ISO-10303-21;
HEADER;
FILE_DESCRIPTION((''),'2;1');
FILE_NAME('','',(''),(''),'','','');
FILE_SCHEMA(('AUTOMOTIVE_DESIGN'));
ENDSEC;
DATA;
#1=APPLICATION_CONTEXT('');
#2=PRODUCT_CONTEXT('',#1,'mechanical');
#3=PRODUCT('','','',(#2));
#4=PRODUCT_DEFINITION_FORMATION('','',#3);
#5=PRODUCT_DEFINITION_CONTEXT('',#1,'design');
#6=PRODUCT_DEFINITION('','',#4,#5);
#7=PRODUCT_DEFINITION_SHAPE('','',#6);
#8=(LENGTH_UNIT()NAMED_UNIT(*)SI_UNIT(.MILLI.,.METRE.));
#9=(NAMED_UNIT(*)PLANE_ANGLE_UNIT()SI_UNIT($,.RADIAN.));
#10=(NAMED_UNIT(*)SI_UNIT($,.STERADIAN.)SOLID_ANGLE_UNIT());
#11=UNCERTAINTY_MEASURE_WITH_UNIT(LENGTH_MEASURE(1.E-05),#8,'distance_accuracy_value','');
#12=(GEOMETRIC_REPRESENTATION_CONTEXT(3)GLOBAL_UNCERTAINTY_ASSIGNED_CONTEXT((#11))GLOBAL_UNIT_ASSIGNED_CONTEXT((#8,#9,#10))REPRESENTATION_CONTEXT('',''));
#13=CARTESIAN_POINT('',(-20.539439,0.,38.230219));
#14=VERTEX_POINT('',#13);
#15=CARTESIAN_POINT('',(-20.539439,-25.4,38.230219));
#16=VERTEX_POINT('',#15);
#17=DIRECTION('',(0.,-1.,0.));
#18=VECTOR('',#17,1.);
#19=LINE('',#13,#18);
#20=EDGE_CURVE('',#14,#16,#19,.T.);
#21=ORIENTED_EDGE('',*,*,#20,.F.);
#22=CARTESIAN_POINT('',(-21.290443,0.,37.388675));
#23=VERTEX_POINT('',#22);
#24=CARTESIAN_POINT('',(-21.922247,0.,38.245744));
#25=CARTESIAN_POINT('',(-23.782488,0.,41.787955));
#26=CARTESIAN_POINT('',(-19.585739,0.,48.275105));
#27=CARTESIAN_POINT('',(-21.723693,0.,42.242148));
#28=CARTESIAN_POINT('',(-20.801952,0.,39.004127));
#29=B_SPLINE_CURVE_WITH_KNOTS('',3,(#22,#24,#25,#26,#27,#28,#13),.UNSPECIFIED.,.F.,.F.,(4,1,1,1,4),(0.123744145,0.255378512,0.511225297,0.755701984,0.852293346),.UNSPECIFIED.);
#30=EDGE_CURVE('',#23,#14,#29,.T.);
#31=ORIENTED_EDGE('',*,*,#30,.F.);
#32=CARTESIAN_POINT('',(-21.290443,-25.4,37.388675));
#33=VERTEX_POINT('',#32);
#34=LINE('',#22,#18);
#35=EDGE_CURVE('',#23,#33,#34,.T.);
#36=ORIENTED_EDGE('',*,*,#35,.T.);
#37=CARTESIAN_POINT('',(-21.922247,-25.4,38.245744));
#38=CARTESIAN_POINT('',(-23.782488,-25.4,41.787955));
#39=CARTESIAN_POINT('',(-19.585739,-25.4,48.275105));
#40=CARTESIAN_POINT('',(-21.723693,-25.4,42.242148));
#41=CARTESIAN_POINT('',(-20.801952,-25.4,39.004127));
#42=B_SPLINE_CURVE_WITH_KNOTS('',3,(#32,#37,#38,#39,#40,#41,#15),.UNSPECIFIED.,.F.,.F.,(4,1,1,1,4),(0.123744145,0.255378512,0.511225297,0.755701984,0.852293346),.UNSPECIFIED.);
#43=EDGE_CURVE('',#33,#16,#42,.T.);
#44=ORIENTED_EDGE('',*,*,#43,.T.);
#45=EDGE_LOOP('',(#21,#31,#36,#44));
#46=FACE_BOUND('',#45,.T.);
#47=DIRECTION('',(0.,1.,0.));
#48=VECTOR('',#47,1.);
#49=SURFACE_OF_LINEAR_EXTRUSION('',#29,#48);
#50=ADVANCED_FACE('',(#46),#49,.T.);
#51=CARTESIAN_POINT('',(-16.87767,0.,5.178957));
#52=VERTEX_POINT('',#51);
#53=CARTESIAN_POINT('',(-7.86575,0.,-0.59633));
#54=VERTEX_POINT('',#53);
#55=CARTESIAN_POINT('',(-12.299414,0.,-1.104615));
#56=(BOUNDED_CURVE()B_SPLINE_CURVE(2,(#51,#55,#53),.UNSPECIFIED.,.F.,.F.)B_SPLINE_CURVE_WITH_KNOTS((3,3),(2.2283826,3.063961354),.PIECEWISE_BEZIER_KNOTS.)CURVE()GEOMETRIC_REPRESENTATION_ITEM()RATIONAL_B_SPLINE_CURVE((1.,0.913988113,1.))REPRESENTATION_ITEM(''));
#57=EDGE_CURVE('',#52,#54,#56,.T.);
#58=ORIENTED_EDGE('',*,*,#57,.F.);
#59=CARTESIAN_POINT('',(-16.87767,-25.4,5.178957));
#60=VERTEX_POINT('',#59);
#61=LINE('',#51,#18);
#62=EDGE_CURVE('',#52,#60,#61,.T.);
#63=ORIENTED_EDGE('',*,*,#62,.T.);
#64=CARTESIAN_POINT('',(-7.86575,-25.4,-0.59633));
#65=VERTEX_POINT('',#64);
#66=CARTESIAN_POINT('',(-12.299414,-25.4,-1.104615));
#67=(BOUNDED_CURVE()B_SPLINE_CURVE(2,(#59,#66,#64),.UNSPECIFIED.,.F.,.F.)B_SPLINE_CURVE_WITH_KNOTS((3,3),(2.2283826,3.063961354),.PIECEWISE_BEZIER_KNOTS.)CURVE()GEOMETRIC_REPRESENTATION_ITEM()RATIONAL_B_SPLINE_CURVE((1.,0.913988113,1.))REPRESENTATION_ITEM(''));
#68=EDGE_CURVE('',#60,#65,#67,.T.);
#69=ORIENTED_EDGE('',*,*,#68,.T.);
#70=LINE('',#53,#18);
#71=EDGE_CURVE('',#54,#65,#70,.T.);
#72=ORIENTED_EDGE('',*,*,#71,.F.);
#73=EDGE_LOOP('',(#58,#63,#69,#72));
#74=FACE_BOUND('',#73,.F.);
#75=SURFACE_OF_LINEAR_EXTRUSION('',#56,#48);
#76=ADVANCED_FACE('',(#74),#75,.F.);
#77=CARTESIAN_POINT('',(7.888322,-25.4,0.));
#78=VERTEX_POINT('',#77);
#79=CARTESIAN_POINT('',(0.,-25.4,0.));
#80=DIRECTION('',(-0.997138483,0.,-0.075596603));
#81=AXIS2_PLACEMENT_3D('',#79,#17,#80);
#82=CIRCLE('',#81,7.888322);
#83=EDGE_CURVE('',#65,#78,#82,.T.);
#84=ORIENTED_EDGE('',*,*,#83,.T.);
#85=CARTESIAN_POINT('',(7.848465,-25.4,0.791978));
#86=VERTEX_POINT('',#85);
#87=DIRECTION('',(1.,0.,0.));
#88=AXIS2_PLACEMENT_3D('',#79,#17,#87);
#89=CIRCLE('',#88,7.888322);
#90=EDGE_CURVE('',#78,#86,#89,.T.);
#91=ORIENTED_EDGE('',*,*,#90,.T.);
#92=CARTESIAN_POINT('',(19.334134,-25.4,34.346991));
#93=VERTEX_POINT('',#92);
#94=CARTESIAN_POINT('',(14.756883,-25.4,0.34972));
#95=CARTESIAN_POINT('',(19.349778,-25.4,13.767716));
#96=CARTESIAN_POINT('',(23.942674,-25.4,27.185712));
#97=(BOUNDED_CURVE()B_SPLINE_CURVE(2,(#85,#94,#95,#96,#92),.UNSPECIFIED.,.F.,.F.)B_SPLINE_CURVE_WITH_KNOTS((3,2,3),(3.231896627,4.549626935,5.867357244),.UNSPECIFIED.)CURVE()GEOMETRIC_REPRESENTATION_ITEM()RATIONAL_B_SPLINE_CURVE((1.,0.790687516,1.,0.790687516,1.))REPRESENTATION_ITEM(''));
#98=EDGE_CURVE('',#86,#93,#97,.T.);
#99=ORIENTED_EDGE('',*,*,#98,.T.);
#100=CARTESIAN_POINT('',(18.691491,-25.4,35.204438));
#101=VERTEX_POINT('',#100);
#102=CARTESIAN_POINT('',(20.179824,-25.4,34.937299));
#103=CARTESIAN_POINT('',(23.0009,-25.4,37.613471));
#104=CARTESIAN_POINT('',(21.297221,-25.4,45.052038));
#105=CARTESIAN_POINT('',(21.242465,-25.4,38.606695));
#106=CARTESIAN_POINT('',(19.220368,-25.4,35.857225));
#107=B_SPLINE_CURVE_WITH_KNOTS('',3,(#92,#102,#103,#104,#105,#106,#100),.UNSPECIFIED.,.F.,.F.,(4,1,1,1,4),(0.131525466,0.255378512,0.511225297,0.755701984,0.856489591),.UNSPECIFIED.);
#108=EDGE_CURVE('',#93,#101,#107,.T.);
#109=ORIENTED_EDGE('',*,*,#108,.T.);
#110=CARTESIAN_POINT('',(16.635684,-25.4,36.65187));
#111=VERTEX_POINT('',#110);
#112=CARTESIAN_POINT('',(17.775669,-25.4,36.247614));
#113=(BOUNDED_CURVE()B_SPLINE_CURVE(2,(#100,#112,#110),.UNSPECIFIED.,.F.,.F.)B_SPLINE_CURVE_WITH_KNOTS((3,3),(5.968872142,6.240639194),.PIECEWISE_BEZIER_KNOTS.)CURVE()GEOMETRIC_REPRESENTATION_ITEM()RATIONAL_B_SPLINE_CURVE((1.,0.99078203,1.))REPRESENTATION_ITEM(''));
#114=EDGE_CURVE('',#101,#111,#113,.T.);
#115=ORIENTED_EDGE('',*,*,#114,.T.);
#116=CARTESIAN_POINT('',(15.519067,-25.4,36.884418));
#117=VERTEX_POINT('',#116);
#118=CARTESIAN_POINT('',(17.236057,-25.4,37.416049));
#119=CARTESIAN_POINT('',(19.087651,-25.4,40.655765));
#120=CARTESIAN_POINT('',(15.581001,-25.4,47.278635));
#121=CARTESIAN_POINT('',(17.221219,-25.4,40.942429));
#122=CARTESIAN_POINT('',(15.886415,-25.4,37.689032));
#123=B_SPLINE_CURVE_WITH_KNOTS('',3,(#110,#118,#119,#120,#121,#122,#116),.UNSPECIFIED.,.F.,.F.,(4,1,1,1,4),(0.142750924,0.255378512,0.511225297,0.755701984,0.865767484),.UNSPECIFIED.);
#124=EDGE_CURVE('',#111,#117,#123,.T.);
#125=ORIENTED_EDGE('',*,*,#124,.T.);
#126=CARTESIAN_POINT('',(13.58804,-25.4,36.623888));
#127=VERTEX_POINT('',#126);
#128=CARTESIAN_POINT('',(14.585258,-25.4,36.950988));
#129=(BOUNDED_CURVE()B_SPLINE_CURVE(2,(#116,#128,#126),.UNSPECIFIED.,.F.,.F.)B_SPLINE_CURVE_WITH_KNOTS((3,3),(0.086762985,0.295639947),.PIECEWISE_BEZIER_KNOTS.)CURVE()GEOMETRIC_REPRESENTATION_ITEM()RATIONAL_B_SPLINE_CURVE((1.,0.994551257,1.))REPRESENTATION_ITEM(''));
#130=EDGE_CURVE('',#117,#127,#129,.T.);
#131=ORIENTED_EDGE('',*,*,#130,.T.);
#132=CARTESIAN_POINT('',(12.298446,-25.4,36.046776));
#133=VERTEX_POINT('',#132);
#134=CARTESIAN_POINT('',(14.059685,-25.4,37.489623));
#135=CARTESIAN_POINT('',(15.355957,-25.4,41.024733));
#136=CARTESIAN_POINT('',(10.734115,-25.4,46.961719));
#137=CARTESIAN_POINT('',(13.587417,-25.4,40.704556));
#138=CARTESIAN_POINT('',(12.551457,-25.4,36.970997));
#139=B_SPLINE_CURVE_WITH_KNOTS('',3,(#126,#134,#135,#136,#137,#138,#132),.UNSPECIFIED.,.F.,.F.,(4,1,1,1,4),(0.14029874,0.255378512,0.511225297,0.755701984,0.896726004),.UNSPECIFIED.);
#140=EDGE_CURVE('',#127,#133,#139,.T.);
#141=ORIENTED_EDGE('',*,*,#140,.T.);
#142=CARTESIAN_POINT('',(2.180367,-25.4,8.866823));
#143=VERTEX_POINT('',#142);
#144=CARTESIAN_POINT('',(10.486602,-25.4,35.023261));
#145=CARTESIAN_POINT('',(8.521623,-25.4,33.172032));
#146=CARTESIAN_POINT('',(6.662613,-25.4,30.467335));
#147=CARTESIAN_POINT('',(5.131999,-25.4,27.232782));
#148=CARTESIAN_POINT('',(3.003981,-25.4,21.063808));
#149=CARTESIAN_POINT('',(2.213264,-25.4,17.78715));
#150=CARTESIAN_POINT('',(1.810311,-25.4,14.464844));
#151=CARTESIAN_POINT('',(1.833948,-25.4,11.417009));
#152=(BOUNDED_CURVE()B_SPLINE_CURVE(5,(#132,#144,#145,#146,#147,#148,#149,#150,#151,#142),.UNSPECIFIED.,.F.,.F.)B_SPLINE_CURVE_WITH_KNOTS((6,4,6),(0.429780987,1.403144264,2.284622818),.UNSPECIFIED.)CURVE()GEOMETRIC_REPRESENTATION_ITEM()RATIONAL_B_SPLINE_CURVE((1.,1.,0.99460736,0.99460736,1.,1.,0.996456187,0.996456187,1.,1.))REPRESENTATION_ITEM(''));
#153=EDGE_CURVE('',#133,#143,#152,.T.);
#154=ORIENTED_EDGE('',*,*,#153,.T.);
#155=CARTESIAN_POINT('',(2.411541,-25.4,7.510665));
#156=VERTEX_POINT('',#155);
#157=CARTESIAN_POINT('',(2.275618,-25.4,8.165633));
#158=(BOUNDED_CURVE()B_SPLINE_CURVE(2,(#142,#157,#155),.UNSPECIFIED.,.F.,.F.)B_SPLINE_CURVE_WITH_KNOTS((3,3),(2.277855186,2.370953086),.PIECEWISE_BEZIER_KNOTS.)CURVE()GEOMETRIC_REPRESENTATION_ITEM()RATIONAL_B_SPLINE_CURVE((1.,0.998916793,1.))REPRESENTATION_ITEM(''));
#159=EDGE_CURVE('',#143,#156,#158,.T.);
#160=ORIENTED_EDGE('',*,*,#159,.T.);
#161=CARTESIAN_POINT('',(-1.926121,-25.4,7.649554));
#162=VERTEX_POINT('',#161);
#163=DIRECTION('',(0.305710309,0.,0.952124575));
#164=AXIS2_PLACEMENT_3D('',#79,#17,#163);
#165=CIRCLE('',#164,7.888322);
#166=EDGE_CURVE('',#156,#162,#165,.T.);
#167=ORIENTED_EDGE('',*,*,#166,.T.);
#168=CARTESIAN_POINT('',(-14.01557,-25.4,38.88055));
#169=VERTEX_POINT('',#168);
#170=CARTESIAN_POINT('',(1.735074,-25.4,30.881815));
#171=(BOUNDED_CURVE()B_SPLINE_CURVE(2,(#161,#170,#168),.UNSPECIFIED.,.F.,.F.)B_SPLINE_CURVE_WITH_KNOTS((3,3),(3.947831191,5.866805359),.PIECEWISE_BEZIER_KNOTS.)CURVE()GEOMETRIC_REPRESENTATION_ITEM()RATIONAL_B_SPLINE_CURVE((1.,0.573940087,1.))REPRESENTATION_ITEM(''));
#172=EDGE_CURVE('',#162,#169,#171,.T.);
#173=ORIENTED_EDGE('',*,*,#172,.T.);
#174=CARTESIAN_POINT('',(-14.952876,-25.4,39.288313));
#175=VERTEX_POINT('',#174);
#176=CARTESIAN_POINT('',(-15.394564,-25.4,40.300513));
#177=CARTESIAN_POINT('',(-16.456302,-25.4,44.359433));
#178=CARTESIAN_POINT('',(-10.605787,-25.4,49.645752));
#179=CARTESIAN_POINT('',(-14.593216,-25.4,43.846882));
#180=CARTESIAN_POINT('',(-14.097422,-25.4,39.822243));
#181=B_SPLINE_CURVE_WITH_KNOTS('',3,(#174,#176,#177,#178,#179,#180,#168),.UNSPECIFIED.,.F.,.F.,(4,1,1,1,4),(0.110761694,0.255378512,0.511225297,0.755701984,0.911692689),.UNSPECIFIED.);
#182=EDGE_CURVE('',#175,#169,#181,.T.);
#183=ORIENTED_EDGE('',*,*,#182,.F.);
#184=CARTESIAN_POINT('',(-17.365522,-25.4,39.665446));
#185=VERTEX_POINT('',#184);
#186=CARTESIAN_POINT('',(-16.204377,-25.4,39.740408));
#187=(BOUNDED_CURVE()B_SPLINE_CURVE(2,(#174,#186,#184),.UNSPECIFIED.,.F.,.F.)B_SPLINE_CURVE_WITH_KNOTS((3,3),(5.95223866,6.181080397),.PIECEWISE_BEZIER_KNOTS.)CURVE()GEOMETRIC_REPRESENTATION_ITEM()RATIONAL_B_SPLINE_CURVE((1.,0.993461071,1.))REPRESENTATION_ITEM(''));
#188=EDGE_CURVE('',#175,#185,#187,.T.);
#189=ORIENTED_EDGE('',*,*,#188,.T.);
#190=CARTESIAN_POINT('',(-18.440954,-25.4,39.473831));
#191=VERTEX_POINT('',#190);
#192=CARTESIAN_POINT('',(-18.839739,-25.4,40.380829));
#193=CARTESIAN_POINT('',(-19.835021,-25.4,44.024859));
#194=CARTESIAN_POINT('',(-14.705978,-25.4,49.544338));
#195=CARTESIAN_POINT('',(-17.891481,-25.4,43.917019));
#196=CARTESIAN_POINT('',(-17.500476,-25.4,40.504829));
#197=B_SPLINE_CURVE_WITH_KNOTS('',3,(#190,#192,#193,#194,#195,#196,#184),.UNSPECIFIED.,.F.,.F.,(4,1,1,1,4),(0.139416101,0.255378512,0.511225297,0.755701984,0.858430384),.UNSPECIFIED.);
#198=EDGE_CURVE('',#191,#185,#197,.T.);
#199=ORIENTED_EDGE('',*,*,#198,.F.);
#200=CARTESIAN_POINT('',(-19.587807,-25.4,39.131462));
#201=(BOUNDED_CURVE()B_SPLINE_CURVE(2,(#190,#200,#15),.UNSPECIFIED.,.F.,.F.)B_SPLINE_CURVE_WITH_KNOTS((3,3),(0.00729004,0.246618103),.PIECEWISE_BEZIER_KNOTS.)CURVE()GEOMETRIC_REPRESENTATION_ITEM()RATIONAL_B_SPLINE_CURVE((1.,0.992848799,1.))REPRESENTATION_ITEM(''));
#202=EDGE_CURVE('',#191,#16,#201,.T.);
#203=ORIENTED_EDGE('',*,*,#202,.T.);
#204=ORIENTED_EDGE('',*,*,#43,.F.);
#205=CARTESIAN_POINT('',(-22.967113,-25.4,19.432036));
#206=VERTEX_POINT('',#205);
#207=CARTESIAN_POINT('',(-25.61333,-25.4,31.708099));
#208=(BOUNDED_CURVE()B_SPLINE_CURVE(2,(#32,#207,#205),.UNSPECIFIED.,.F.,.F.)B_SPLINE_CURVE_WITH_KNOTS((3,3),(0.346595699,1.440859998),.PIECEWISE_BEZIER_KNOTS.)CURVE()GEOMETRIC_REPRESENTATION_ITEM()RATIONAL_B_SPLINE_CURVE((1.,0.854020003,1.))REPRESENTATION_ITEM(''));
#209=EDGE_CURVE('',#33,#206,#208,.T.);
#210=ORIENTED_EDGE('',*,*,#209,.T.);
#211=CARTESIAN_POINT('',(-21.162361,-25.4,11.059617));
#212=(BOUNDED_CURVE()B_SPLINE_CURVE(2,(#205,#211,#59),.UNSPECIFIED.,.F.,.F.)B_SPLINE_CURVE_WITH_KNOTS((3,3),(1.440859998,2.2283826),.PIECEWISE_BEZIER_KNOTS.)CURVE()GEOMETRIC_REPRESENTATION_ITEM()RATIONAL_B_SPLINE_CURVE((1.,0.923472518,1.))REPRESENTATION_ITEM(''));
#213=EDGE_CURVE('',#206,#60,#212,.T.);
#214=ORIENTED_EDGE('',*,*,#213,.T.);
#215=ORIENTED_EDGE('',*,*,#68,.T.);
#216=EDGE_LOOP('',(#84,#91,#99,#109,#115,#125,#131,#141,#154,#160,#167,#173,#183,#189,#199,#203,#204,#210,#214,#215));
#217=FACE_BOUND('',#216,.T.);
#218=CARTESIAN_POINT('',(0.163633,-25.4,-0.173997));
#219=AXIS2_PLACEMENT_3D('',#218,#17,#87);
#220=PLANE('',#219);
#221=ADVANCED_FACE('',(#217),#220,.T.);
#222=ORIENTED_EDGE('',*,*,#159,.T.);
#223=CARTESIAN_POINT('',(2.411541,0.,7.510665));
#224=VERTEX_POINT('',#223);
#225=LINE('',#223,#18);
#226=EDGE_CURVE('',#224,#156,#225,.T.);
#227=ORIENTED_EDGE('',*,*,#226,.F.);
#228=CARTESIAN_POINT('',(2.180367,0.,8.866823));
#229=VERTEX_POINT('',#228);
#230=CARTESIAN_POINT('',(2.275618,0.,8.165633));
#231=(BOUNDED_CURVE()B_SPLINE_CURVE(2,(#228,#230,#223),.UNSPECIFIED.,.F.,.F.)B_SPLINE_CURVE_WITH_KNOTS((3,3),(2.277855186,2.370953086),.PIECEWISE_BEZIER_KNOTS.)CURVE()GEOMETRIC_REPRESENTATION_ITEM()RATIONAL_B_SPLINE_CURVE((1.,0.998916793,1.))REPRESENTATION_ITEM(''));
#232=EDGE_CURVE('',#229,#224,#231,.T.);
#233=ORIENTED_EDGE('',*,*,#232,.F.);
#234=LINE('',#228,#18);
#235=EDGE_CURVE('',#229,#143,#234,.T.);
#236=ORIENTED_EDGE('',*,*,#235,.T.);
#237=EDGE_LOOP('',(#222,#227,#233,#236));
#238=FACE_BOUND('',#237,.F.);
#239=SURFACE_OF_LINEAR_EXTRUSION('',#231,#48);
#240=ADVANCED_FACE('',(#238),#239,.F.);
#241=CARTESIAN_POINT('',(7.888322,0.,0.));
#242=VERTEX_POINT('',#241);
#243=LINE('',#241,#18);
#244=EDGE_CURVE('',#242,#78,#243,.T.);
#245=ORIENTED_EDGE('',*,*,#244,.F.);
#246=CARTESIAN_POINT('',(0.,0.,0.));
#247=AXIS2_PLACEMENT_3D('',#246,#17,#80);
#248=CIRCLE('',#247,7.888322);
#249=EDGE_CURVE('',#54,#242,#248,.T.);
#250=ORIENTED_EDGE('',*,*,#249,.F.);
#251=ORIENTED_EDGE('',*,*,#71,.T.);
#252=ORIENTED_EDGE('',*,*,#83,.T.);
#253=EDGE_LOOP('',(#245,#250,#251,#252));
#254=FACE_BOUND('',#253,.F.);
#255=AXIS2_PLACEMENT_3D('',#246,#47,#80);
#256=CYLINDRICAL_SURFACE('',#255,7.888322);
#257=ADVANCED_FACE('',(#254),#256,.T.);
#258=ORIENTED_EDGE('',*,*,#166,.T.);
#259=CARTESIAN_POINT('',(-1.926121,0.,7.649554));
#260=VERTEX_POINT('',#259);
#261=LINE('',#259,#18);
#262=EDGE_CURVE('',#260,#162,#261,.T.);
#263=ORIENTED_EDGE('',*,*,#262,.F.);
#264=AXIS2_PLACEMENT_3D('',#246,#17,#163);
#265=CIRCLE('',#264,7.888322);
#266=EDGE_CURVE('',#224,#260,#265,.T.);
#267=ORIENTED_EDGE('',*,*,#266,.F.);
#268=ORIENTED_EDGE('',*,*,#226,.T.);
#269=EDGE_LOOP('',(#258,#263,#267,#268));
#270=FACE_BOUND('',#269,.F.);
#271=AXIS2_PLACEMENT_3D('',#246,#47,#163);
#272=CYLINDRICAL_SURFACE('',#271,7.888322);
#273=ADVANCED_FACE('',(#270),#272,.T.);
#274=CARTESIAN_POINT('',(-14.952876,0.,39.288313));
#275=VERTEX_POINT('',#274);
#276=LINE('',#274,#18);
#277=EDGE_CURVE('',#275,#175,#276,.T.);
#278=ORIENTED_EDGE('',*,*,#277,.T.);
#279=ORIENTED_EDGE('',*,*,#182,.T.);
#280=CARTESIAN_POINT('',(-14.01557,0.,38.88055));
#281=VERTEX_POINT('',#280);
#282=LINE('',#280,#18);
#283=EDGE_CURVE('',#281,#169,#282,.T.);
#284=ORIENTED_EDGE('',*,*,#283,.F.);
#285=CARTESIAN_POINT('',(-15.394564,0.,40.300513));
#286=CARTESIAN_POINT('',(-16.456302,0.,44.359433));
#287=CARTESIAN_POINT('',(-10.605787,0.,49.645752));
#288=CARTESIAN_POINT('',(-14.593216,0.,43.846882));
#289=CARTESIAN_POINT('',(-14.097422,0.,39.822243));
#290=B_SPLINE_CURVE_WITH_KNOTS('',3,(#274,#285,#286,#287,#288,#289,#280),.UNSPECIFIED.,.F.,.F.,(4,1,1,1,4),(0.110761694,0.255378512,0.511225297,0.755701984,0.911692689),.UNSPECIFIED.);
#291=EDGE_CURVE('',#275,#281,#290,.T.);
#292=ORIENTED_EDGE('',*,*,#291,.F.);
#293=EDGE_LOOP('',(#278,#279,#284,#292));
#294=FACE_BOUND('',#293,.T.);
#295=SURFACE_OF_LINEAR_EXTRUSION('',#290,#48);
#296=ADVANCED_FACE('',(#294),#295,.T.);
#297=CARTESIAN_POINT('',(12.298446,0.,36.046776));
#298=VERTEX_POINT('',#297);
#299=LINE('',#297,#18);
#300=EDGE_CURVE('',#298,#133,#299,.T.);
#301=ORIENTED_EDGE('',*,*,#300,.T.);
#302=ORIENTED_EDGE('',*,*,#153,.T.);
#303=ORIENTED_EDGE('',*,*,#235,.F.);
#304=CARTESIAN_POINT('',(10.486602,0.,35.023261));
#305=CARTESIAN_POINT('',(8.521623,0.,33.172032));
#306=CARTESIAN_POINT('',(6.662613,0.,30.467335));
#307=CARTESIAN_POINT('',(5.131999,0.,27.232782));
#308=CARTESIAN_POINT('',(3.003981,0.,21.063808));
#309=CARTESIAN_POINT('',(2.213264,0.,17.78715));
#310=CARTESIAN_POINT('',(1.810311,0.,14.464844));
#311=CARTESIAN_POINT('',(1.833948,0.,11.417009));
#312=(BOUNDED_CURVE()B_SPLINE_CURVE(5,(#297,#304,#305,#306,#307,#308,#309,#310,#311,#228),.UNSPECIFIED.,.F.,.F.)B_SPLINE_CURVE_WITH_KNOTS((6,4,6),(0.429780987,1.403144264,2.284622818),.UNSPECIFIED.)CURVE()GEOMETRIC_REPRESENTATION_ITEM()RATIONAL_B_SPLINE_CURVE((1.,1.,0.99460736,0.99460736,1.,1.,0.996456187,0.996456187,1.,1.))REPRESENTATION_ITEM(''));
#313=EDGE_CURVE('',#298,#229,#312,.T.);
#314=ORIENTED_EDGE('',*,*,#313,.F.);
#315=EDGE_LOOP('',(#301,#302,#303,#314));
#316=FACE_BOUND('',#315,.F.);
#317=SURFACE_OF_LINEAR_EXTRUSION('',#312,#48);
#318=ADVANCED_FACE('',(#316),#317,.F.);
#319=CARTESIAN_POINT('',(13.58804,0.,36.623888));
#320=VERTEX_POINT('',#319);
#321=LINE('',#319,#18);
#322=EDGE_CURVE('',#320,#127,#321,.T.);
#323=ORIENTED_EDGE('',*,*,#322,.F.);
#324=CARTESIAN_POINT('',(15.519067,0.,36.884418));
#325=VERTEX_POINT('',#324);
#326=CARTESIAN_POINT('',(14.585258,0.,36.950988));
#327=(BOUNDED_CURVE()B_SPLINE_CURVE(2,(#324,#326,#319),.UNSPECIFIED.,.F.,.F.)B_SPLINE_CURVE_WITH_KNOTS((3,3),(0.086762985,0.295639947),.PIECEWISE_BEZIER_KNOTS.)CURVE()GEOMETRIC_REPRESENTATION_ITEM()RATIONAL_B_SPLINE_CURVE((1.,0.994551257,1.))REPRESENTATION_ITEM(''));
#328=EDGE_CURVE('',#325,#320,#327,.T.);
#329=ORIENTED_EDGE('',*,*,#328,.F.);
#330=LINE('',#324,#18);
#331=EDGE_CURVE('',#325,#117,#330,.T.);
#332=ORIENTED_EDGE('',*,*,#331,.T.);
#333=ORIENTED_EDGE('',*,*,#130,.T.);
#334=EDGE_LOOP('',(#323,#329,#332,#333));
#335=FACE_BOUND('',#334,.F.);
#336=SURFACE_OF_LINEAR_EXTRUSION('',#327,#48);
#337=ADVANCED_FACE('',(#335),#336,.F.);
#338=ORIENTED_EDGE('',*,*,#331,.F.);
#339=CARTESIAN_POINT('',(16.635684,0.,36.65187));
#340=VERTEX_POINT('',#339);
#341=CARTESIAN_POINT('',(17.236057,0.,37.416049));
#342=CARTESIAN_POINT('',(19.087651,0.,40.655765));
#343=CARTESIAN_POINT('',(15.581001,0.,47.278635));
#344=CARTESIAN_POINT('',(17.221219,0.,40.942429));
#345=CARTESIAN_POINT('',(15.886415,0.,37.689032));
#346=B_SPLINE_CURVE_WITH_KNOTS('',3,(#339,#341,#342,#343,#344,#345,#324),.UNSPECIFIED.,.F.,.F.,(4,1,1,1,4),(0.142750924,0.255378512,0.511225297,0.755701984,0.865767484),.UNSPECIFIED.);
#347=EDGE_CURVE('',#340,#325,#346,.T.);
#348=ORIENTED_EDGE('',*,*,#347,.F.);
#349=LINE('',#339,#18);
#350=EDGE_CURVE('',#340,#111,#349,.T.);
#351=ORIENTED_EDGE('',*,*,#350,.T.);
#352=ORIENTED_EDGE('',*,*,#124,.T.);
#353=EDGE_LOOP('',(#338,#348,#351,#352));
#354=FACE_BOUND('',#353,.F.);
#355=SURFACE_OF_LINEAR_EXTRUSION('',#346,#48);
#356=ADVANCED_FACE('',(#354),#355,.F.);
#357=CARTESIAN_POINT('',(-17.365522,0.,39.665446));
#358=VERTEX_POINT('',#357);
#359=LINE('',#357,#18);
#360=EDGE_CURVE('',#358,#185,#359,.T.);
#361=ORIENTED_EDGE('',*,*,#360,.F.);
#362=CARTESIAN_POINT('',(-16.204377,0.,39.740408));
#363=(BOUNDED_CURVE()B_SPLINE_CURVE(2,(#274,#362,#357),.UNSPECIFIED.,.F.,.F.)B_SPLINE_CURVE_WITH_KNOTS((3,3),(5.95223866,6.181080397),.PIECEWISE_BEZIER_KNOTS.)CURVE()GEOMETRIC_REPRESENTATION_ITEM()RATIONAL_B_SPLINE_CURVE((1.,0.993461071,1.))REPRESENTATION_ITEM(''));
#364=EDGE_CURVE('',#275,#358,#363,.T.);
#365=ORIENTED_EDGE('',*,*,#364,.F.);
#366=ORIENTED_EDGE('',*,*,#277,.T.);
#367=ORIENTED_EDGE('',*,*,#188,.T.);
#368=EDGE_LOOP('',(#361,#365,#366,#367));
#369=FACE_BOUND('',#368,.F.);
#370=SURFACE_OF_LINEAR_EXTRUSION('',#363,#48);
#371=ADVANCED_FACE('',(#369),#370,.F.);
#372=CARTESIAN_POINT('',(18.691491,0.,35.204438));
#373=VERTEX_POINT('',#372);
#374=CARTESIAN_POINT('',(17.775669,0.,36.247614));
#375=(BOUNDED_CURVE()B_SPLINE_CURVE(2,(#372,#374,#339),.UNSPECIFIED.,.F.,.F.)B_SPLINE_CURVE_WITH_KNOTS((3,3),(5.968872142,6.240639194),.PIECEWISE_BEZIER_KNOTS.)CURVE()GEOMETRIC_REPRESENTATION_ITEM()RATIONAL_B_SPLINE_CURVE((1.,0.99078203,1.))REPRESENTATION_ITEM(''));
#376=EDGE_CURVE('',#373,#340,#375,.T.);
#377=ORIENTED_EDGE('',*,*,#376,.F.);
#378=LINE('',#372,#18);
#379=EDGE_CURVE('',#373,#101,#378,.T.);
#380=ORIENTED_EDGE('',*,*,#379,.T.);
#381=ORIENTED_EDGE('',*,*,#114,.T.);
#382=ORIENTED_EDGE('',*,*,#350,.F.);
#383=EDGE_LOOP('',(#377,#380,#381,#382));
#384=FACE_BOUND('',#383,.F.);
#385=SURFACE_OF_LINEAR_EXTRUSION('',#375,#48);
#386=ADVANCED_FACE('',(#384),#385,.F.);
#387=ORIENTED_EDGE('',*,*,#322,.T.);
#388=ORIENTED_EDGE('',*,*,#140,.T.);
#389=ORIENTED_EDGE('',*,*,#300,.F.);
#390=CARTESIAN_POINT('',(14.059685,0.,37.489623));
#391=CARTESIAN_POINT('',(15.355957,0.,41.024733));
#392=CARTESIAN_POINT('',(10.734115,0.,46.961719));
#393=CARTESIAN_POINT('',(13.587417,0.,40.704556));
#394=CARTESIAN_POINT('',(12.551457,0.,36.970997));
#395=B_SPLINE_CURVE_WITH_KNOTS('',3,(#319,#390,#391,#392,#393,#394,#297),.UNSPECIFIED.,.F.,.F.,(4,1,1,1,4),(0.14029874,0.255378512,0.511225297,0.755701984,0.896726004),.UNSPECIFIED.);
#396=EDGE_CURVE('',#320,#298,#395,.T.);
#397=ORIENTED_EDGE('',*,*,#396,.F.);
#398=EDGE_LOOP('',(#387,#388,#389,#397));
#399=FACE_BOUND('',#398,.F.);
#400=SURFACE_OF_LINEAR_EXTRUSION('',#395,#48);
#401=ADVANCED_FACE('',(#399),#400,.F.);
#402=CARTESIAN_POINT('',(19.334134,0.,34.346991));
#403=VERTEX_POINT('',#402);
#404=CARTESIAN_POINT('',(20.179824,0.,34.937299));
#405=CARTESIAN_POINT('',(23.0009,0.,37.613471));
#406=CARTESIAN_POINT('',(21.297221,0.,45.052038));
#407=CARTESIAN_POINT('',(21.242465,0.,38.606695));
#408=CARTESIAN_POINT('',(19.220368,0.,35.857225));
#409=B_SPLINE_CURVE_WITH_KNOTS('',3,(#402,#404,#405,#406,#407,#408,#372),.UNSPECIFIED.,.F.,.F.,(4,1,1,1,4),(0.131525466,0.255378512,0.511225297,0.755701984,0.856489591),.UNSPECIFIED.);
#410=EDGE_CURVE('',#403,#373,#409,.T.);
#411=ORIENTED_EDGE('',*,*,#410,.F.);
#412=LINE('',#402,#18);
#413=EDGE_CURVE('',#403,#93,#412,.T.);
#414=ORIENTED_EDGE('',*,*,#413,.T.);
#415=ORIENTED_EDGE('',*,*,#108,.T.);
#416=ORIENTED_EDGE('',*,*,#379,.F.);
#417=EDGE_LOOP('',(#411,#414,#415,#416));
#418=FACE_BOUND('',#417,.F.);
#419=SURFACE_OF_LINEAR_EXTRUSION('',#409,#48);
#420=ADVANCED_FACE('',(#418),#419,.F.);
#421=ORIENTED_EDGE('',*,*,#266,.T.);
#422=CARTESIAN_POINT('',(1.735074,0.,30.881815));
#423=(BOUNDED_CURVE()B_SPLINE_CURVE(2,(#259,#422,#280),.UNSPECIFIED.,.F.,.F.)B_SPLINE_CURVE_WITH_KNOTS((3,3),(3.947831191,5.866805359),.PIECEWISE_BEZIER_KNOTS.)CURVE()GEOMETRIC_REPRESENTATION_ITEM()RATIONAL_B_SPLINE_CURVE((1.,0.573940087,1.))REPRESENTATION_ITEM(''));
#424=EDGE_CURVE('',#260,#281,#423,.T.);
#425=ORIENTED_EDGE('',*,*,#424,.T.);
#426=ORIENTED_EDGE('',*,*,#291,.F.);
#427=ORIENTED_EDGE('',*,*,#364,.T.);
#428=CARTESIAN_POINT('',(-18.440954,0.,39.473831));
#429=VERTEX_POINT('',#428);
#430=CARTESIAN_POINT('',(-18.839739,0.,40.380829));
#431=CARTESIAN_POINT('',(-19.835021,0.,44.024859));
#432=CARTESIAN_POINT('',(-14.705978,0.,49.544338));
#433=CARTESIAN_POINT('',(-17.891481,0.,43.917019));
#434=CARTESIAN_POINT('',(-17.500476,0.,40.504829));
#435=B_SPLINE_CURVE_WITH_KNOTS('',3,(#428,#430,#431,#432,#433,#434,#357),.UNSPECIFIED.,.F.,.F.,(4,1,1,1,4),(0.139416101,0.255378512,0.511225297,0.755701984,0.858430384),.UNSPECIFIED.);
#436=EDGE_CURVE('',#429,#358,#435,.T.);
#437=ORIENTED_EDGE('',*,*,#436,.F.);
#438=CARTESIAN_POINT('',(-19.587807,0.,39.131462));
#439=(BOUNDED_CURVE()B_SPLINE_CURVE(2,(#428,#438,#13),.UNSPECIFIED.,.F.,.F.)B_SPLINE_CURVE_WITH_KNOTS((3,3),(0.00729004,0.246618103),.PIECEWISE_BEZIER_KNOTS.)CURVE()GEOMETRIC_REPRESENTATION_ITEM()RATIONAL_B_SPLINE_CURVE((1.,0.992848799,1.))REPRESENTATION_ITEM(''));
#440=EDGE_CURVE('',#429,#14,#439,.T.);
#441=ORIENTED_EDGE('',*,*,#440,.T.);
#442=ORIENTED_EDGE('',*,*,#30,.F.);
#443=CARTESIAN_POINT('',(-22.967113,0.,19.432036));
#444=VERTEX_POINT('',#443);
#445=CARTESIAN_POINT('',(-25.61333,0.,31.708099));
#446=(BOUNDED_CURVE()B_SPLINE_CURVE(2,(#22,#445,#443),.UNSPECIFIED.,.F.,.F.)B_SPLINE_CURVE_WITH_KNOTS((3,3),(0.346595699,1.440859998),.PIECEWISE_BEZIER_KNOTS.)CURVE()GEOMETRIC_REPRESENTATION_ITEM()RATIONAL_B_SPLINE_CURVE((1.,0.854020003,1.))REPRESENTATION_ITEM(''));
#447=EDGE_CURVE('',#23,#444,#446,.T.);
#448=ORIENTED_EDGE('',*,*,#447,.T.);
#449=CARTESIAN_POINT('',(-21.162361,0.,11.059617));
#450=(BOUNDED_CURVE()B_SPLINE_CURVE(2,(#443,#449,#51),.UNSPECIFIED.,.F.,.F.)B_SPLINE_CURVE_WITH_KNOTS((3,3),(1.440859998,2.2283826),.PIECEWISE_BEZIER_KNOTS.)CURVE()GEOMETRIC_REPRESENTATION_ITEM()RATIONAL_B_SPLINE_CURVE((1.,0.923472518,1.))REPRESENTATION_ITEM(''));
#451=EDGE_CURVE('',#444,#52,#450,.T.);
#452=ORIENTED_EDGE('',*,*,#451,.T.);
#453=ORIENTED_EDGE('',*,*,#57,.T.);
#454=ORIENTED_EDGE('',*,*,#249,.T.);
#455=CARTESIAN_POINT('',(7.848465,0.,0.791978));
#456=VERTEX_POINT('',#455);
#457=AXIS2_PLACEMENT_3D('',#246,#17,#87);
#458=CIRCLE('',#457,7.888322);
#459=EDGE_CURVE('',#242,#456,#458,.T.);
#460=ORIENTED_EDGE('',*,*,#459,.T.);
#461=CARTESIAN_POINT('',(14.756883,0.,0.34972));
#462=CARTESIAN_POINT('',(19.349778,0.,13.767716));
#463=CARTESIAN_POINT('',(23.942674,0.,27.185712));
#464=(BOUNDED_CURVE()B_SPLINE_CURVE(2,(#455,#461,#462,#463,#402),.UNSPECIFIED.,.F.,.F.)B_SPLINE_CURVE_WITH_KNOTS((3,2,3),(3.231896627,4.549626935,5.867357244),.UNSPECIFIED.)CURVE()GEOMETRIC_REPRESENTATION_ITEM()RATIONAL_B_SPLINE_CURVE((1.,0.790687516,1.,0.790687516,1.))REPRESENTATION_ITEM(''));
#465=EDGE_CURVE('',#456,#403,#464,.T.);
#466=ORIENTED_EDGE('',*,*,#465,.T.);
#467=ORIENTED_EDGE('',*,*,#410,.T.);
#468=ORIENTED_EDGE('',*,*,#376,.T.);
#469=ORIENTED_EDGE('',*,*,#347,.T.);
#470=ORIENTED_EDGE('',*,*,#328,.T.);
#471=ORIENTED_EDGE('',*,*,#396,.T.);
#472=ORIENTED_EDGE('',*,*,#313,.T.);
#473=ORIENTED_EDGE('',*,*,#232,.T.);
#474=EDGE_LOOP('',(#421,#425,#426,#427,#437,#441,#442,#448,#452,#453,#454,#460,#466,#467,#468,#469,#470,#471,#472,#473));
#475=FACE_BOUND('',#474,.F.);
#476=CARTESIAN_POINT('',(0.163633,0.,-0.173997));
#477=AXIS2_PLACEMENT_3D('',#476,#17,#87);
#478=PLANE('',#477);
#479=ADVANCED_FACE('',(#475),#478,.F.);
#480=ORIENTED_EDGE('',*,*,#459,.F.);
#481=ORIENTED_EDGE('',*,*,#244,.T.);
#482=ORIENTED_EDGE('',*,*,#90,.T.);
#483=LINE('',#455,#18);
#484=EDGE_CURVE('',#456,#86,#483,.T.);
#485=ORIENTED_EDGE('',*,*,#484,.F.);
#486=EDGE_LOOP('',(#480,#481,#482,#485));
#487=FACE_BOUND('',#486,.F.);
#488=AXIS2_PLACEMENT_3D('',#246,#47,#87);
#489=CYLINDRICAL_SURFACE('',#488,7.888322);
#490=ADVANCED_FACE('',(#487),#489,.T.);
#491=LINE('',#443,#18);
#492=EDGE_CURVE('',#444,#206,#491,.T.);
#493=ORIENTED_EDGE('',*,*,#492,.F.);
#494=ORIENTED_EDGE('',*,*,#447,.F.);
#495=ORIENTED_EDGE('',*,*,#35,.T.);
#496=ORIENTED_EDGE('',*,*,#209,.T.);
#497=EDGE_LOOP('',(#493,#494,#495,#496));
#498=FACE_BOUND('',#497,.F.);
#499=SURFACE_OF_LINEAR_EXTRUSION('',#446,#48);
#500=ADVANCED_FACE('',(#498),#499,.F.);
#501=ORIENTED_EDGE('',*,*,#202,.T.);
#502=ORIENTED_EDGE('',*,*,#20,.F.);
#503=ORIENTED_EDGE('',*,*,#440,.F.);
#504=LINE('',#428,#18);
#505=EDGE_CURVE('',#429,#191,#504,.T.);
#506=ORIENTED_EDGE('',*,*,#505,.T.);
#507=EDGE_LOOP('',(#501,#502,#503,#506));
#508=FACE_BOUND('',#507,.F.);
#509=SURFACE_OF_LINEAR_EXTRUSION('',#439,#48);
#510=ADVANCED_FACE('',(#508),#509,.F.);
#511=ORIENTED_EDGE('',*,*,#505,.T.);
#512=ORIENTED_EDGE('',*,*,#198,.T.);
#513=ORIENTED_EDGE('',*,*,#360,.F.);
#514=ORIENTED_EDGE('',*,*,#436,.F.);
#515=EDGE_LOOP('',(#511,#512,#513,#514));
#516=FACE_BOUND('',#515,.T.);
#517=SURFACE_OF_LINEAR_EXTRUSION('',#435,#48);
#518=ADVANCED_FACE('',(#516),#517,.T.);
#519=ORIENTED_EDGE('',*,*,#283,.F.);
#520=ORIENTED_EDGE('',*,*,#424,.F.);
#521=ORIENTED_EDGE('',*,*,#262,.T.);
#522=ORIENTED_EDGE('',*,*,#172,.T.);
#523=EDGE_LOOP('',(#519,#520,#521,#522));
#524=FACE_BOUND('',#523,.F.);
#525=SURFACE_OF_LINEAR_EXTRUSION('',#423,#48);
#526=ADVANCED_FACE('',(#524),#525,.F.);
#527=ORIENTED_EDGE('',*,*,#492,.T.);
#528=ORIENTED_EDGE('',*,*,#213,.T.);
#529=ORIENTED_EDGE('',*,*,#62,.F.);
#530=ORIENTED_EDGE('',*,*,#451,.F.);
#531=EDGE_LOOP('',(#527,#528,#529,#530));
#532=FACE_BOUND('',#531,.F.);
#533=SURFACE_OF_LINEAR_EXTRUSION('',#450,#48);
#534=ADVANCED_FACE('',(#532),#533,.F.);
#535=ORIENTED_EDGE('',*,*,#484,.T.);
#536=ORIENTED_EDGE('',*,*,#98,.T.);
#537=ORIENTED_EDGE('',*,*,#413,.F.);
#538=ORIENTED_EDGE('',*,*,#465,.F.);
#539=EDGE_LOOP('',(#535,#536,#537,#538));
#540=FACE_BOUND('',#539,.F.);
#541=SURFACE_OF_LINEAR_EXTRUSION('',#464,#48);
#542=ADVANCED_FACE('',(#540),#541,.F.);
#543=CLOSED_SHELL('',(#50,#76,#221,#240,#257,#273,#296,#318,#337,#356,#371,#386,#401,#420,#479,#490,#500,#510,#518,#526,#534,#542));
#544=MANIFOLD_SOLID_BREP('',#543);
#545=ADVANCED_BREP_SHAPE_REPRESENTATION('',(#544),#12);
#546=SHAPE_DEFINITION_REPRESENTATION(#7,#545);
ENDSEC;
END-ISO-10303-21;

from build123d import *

# Parameters (mm, degrees)
F1_DEPTH = 25.4


# Not quite as in the source:
# - a feature of the source that left no trace in its solid (it failed there, or was rolled back) is left out


with BuildPart() as f1:
    # F0 (on Front) → F1 (new body)
    with BuildSketch(Plane.XZ):
        with BuildLine():
            ThreePointArc((-7.8657495184, -0.5963303534), (0.2983787071, -7.8826769263), (7.8883220888, 0))
            ThreePointArc((7.8883220888, 0), (7.8783514063, 0.396490223), (7.848464564, 0.7919781345))
            add(Edge.make_bspline(
                [(2.4115413859, 7.5106653182), (3.7514217892, 1.0542595546), (7.848464564, 0.7919781345)],
                knots=[2.3709530861, 2.3709530861, 2.3709530861, 3.2318966265, 3.2318966265, 3.2318966265], degree=2, weights=[1, 0.9087689813, 1]))
            ThreePointArc((2.4115413859, 7.5106653182), (0.2524493598, 7.8842814954), (-1.9261214081, 7.6495543464))
            add(Edge.make_bspline(
                [(-7.8657495184, -0.5963303534), (-3.1402244939, -0.0545859635), (-1.9261214081, 7.6495543464)],
                knots=[3.063961354, 3.063961354, 3.063961354, 3.9478311905, 3.9478311905, 3.9478311905], degree=2, weights=[1, 0.903925812, 1]))
        make_face()
        with BuildLine():
            add(Edge.make_bspline(
                [(2.4115413859, 7.5106653182), (3.7514217892, 1.0542595546), (7.848464564, 0.7919781345)],
                knots=[2.3709530861, 2.3709530861, 2.3709530861, 3.2318966265, 3.2318966265, 3.2318966265], degree=2, weights=[1, 0.9087689813, 1]))
            ThreePointArc((7.848464564, 0.7919781345), (6.1320567423, 4.9622077231), (2.4115413859, 7.5106653182))
        make_face()
        with BuildLine():
            ThreePointArc((2.4115413859, 7.5106653182), (6.1320567423, 4.9622077231), (7.848464564, 0.7919781345))
            add(Edge.make_bspline(
                [(7.848464564, 0.7919781345), (14.756882994, 0.3497201705), (19.3497784768, 13.7677159429), (23.9426739595, 27.1857117153), (19.3341341159, 34.3469906686)],
                knots=[3.2318966265, 3.2318966265, 3.2318966265, 4.5496269351, 4.5496269351, 5.8673572438, 5.8673572438, 5.8673572438], degree=2, weights=[1, 0.7906875156, 1, 0.7906875156, 1]))
            add(Edge.make_bspline(
                [(17.4727290869, 33.5254147649), (17.6220032936, 33.411960895), (18.4360560306, 33.7201138992), (19.3341341159, 34.3469906686)],
                knots=[0, 0, 0, 0, 0.1315254658, 0.1315254658, 0.1315254658, 0.1315254658], degree=3))
            add(Edge.make_bspline(
                [(18.6914906825, 35.2044384669), (17.9384272736, 34.2749423779), (17.3098526255, 33.649206847), (17.4727290869, 33.5254147649)],
                knots=[0.856489591, 0.856489591, 0.856489591, 0.856489591, 1, 1, 1, 1], degree=3))
            add(Edge.make_bspline(
                [(18.6914906825, 35.2044384669), (17.7756691464, 36.2476144498), (16.635683622, 36.651870342)],
                knots=[5.9688721424, 5.9688721424, 5.9688721424, 6.2406391942, 6.2406391942, 6.2406391942], degree=2, weights=[1, 0.9907820304, 1]))
            add(Edge.make_bspline(
                [(14.8701351136, 35.1549200714), (15.058499279, 35.0779113459), (15.8747352171, 35.6833048254), (16.635683622, 36.651870342)],
                knots=[0, 0, 0, 0, 0.1427509238, 0.1427509238, 0.1427509238, 0.1427509238], degree=3))
            add(Edge.make_bspline(
                [(15.5190667523, 36.8844184863), (15.0710606672, 35.9031366901), (14.6930112455, 35.2273334378), (14.8701351136, 35.1549200714)],
                knots=[0.8657674842, 0.8657674842, 0.8657674842, 0.8657674842, 1, 1, 1, 1], degree=3))
            add(Edge.make_bspline(
                [(15.5190667523, 36.8844184863), (14.5852576975, 36.9509876552), (13.5880398976, 36.6238878042)],
                knots=[0.0867629846, 0.0867629846, 0.0867629846, 0.2956399467, 0.2956399467, 0.2956399467], degree=2, weights=[1, 0.9945512572, 1]))
            add(Edge.make_bspline(
                [(12.1393091977, 34.898750484), (12.3347678279, 34.8563616726), (13.013036649, 35.5684327938), (13.5880398976, 36.6238878042)],
                knots=[0, 0, 0, 0, 0.14029874, 0.14029874, 0.14029874, 0.14029874], degree=3))
            add(Edge.make_bspline(
                [(12.2984461836, 36.0467759602), (12.1131626378, 35.3699550758), (11.9954319704, 34.9299529161), (12.1393091977, 34.898750484)],
                knots=[0.8967260045, 0.8967260045, 0.8967260045, 0.8967260045, 1, 1, 1, 1], degree=3))
            add(Edge.make_bspline(
                [(12.2984461836, 36.0467759602), (7.1738143092, 33.1518583115), (4.0152813166, 23.9954967618)],
                knots=[0.4297809871, 0.4297809871, 0.4297809871, 1.4031442636, 1.4031442636, 1.4031442636], degree=2, weights=[1, 0.8838897048, 1]))
            ThreePointArc((4.0152813166, 23.9954967618), (17.180368154, 14.7231281706), (2.1803673546, 8.8668232992))
            add(Edge.make_bspline(
                [(2.1803673546, 8.8668232992), (2.2756176481, 8.16563333), (2.4115413859, 7.5106653182)],
                knots=[2.2778551861, 2.2778551861, 2.2778551861, 2.3709530861, 2.3709530861, 2.3709530861], degree=2, weights=[1, 0.9989167932, 1]))
        make_face()
        with BuildLine():
            add(Edge.make_bspline(
                [(-16.8776699334, 5.1789570742), (-12.2994136592, -1.1046151815), (-7.8657495184, -0.5963303534)],
                knots=[2.2283826001, 2.2283826001, 2.2283826001, 3.063961354, 3.063961354, 3.063961354], degree=2, weights=[1, 0.9139881132, 1]))
            ThreePointArc((-7.8657495184, -0.5963303534), (-6.4006904066, 4.6105083989), (-1.9261214081, 7.6495543464))
            add(Edge.make_bspline(
                [(-1.9261214081, 7.6495543464), (1.7350735491, 30.881815249), (-14.0155701505, 38.8805496381)],
                knots=[3.9478311905, 3.9478311905, 3.9478311905, 5.8668053595, 5.8668053595, 5.8668053595], degree=2, weights=[1, 0.5739400867, 1]))
            add(Edge.make_bspline(
                [(-14.0155701505, 38.8805496381), (-13.9692331136, 38.3474513179), (-13.9585554591, 38.0149682113), (-14.0843456728, 38.01005632)],
                knots=[0.9116926893, 0.9116926893, 0.9116926893, 0.9116926893, 1, 1, 1, 1], degree=3))
            add(Edge.make_bspline(
                [(-14.0843456728, 38.01005632), (-14.2421212522, 38.0038954552), (-14.6145890314, 38.5130719057), (-14.9528763828, 39.2883132484)],
                knots=[0, 0, 0, 0, 0.1107616938, 0.1107616938, 0.1107616938, 0.1107616938], degree=3))
            add(Edge.make_bspline(
                [(-14.9528763828, 39.2883132484), (-16.2043765158, 39.7404083717), (-17.3655223204, 39.6654462324)],
                knots=[5.9522386597, 5.9522386597, 5.9522386597, 6.1810803974, 6.1810803974, 6.1810803974], degree=2, weights=[1, 0.9934610711, 1]))
            add(Edge.make_bspline(
                [(-17.3655223204, 39.6654462324), (-17.1795434662, 38.5086964495), (-16.9569761256, 37.6751636257), (-17.1571826672, 37.649743259)],
                knots=[0.8584303839, 0.8584303839, 0.8584303839, 0.8584303839, 1, 1, 1, 1], degree=3))
            add(Edge.make_bspline(
                [(-17.1571826672, 37.649743259), (-17.3543437255, 37.6247095794), (-17.9615142694, 38.3833898112), (-18.4409544135, 39.473830681)],
                knots=[0, 0, 0, 0, 0.1394161006, 0.1394161006, 0.1394161006, 0.1394161006], degree=3))
            add(Edge.make_bspline(
                [(-18.4409544135, 39.473830681), (-19.5878068307, 39.1314621905), (-20.5394386517, 38.2302190383)],
                knots=[0.0072900396, 0.0072900396, 0.0072900396, 0.2466181031, 0.2466181031, 0.2466181031], degree=2, weights=[1, 0.9928487993, 1]))
            add(Edge.make_bspline(
                [(-20.5394386517, 38.2302190383), (-20.1380049057, 37.0467661724), (-19.7331230605, 36.1979612039), (-19.9342295527, 36.1355692148)],
                knots=[0.8522933462, 0.8522933462, 0.8522933462, 0.8522933462, 1, 1, 1, 1], degree=3))
            add(Edge.make_bspline(
                [(-19.9342295527, 36.1355692148), (-20.102710459, 36.0832991028), (-20.6965090727, 36.5829791601), (-21.2904428927, 37.3886749603)],
                knots=[0, 0, 0, 0, 0.1237441449, 0.1237441449, 0.1237441449, 0.1237441449], degree=3))
            add(Edge.make_bspline(
                [(-21.2904428927, 37.3886749603), (-25.6133300033, 31.7080986333), (-22.9671125849, 19.4320361213)],
                knots=[0.3465956992, 0.3465956992, 0.3465956992, 1.4408599981, 1.4408599981, 1.4408599981], degree=2, weights=[1, 0.854020003, 1]))
            ThreePointArc((-22.9671125849, 19.4320361213), (-7.0630025292, 17.7995031872), (-16.8776699334, 5.1789570742))
        make_face()
        with BuildLine():
            ThreePointArc((-1.9261214081, 7.6495543464), (-6.4006904066, 4.6105083989), (-7.8657495184, -0.5963303534))
            add(Edge.make_bspline(
                [(-7.8657495184, -0.5963303534), (-3.1402244939, -0.0545859635), (-1.9261214081, 7.6495543464)],
                knots=[3.063961354, 3.063961354, 3.063961354, 3.9478311905, 3.9478311905, 3.9478311905], degree=2, weights=[1, 0.903925812, 1]))
        make_face()
        with BuildLine():
            add(Edge.make_bspline(
                [(17.4727290869, 33.5254147649), (17.6220032936, 33.411960895), (18.4360560306, 33.7201138992), (19.3341341159, 34.3469906686)],
                knots=[0, 0, 0, 0, 0.1315254658, 0.1315254658, 0.1315254658, 0.1315254658], degree=3))
            add(Edge.make_bspline(
                [(19.3341341159, 34.3469906686), (19.0317675739, 34.8168425581), (18.6914906825, 35.2044384669)],
                knots=[5.8673572438, 5.8673572438, 5.8673572438, 5.9688721424, 5.9688721424, 5.9688721424], degree=2, weights=[1, 0.9987121172, 1]))
            add(Edge.make_bspline(
                [(18.6914906825, 35.2044384669), (17.9384272736, 34.2749423779), (17.3098526255, 33.649206847), (17.4727290869, 33.5254147649)],
                knots=[0.856489591, 0.856489591, 0.856489591, 0.856489591, 1, 1, 1, 1], degree=3))
        make_face()
        with BuildLine():
            add(Edge.make_bspline(
                [(19.3341341159, 34.3469906686), (19.0317675739, 34.8168425581), (18.6914906825, 35.2044384669)],
                knots=[5.8673572438, 5.8673572438, 5.8673572438, 5.9688721424, 5.9688721424, 5.9688721424], degree=2, weights=[1, 0.9987121172, 1]))
            add(Edge.make_bspline(
                [(19.3341341159, 34.3469906686), (20.1798236278, 34.9372991482), (23.0009000721, 37.6134714521), (21.297221073, 45.0520380481), (21.2424649704, 38.6066952932), (19.2203684111, 35.8572251704), (18.6914906825, 35.2044384669)],
                knots=[0.1315254658, 0.1315254658, 0.1315254658, 0.1315254658, 0.2553785124, 0.5112252974, 0.7557019837, 0.856489591, 0.856489591, 0.856489591, 0.856489591], degree=3))
        make_face()
        with BuildLine():
            add(Edge.make_bspline(
                [(-22.9671125849, 19.4320361213), (-21.1623610737, 11.0596166006), (-16.8776699334, 5.1789570742)],
                knots=[1.4408599981, 1.4408599981, 1.4408599981, 2.2283826001, 2.2283826001, 2.2283826001], degree=2, weights=[1, 0.9234725177, 1]))
            ThreePointArc((-16.8776699334, 5.1789570742), (-7.0630025292, 17.7995031872), (-22.9671125849, 19.4320361213))
        make_face()
        with BuildLine():
            add(Edge.make_bspline(
                [(4.0152813166, 23.9954967618), (1.2243313225, 15.9047320704), (2.1803673546, 8.8668232992)],
                knots=[1.4031442636, 1.4031442636, 1.4031442636, 2.2778551861, 2.2778551861, 2.2778551861], degree=2, weights=[1, 0.9058749116, 1]))
            ThreePointArc((2.1803673546, 8.8668232992), (17.180368154, 14.7231281706), (4.0152813166, 23.9954967618))
        make_face()
        with BuildLine():
            add(Edge.make_bspline(
                [(-14.0155701505, 38.8805496381), (-13.9692331136, 38.3474513179), (-13.9585554591, 38.0149682113), (-14.0843456728, 38.01005632)],
                knots=[0.9116926893, 0.9116926893, 0.9116926893, 0.9116926893, 1, 1, 1, 1], degree=3))
            add(Edge.make_bspline(
                [(-14.0155701505, 38.8805496381), (-14.4874124644, 39.1201678667), (-14.9528763828, 39.2883132484)],
                knots=[5.8668053595, 5.8668053595, 5.8668053595, 5.9522386597, 5.9522386597, 5.9522386597], degree=2, weights=[1, 0.9990877826, 1]))
            add(Edge.make_bspline(
                [(-14.0843456728, 38.01005632), (-14.2421212522, 38.0038954552), (-14.6145890314, 38.5130719057), (-14.9528763828, 39.2883132484)],
                knots=[0, 0, 0, 0, 0.1107616938, 0.1107616938, 0.1107616938, 0.1107616938], degree=3))
        make_face()
        with BuildLine():
            add(Edge.make_bspline(
                [(-14.0155701505, 38.8805496381), (-14.4874124644, 39.1201678667), (-14.9528763828, 39.2883132484)],
                knots=[5.8668053595, 5.8668053595, 5.8668053595, 5.9522386597, 5.9522386597, 5.9522386597], degree=2, weights=[1, 0.9990877826, 1]))
            add(Edge.make_bspline(
                [(-14.9528763828, 39.2883132484), (-15.3945637468, 40.3005127993), (-16.4563018581, 44.3594325367), (-10.6057865956, 49.6457518305), (-14.5932155129, 43.8468818401), (-14.0974223439, 39.8222427148), (-14.0155701505, 38.8805496381)],
                knots=[0.1107616938, 0.1107616938, 0.1107616938, 0.1107616938, 0.2553785124, 0.5112252974, 0.7557019837, 0.9116926893, 0.9116926893, 0.9116926893, 0.9116926893], degree=3))
        make_face()
        with BuildLine():
            add(Edge.make_bspline(
                [(14.8701351136, 35.1549200714), (15.058499279, 35.0779113459), (15.8747352171, 35.6833048254), (16.635683622, 36.651870342)],
                knots=[0, 0, 0, 0, 0.1427509238, 0.1427509238, 0.1427509238, 0.1427509238], degree=3))
            add(Edge.make_bspline(
                [(16.635683622, 36.651870342), (16.4582878028, 36.7147775488), (16.2765569985, 36.7615083232)],
                knots=[6.2406391942, 6.2406391942, 6.2406391942, 6.2831853072, 6.2831853072, 6.2831853072], degree=2, weights=[1, 0.9997737371, 1]))
            add(Edge.make_bspline(
                [(16.2765569985, 36.7615083232), (15.9057822203, 36.8568504014), (15.5190667523, 36.8844184863)],
                knots=[0, 0, 0, 0.0867629846, 0.0867629846, 0.0867629846], degree=2, weights=[1, 0.9990591706, 1]))
            add(Edge.make_bspline(
                [(15.5190667523, 36.8844184863), (15.0710606672, 35.9031366901), (14.6930112455, 35.2273334378), (14.8701351136, 35.1549200714)],
                knots=[0.8657674842, 0.8657674842, 0.8657674842, 0.8657674842, 1, 1, 1, 1], degree=3))
        make_face()
        with BuildLine():
            add(Edge.make_bspline(
                [(16.635683622, 36.651870342), (16.4582878028, 36.7147775488), (16.2765569985, 36.7615083232)],
                knots=[6.2406391942, 6.2406391942, 6.2406391942, 6.2831853072, 6.2831853072, 6.2831853072], degree=2, weights=[1, 0.9997737371, 1]))
            add(Edge.make_bspline(
                [(16.635683622, 36.651870342), (17.2360565062, 37.4160489236), (19.0876512511, 40.6557653869), (15.581001064, 47.2786345544), (17.2212194556, 40.9424294881), (15.8864145121, 37.6890318199), (15.5190667523, 36.8844184863)],
                knots=[0.1427509238, 0.1427509238, 0.1427509238, 0.1427509238, 0.2553785124, 0.5112252974, 0.7557019837, 0.8657674842, 0.8657674842, 0.8657674842, 0.8657674842], degree=3))
            add(Edge.make_bspline(
                [(16.2765569985, 36.7615083232), (15.9057822203, 36.8568504014), (15.5190667523, 36.8844184863)],
                knots=[0, 0, 0, 0.0867629846, 0.0867629846, 0.0867629846], degree=2, weights=[1, 0.9990591706, 1]))
        make_face()
        with BuildLine():
            add(Edge.make_bspline(
                [(-21.2904428927, 37.3886749603), (-21.9222473541, 38.2457438523), (-23.7824880294, 41.7879552231), (-19.585739103, 48.2751053539), (-21.7236926746, 42.2421476598), (-20.8019524346, 39.0041267923), (-20.5394386517, 38.2302190383)],
                knots=[0.1237441449, 0.1237441449, 0.1237441449, 0.1237441449, 0.2553785124, 0.5112252974, 0.7557019837, 0.8522933462, 0.8522933462, 0.8522933462, 0.8522933462], degree=3))
            add(Edge.make_bspline(
                [(-20.5394386517, 38.2302190383), (-20.9354066326, 37.8552174637), (-21.2904428927, 37.3886749603)],
                knots=[0.2466181031, 0.2466181031, 0.2466181031, 0.3465956992, 0.3465956992, 0.3465956992], degree=2, weights=[1, 0.9987508202, 1]))
        make_face()
        with BuildLine():
            add(Edge.make_bspline(
                [(-20.5394386517, 38.2302190383), (-20.9354066326, 37.8552174637), (-21.2904428927, 37.3886749603)],
                knots=[0.2466181031, 0.2466181031, 0.2466181031, 0.3465956992, 0.3465956992, 0.3465956992], degree=2, weights=[1, 0.9987508202, 1]))
            add(Edge.make_bspline(
                [(-19.9342295527, 36.1355692148), (-20.102710459, 36.0832991028), (-20.6965090727, 36.5829791601), (-21.2904428927, 37.3886749603)],
                knots=[0, 0, 0, 0, 0.1237441449, 0.1237441449, 0.1237441449, 0.1237441449], degree=3))
            add(Edge.make_bspline(
                [(-20.5394386517, 38.2302190383), (-20.1380049057, 37.0467661724), (-19.7331230605, 36.1979612039), (-19.9342295527, 36.1355692148)],
                knots=[0.8522933462, 0.8522933462, 0.8522933462, 0.8522933462, 1, 1, 1, 1], degree=3))
        make_face()
        with BuildLine():
            add(Edge.make_bspline(
                [(13.5880398976, 36.6238878042), (14.0596852095, 37.4896227521), (15.3559565763, 41.0247326105), (10.7341145705, 46.9617190791), (13.5874167288, 40.7045562879), (12.5514569295, 36.9709970293), (12.2984461836, 36.0467759602)],
                knots=[0.14029874, 0.14029874, 0.14029874, 0.14029874, 0.2553785124, 0.5112252974, 0.7557019837, 0.8967260045, 0.8967260045, 0.8967260045, 0.8967260045], degree=3))
            add(Edge.make_bspline(
                [(13.5880398976, 36.6238878042), (12.9489969981, 36.4142737787), (12.2984461836, 36.0467759602)],
                knots=[0.2956399467, 0.2956399467, 0.2956399467, 0.4297809871, 0.4297809871, 0.4297809871], degree=2, weights=[1, 0.9977516157, 1]))
        make_face()
        with BuildLine():
            add(Edge.make_bspline(
                [(13.5880398976, 36.6238878042), (12.9489969981, 36.4142737787), (12.2984461836, 36.0467759602)],
                knots=[0.2956399467, 0.2956399467, 0.2956399467, 0.4297809871, 0.4297809871, 0.4297809871], degree=2, weights=[1, 0.9977516157, 1]))
            add(Edge.make_bspline(
                [(12.2984461836, 36.0467759602), (12.1131626378, 35.3699550758), (11.9954319704, 34.9299529161), (12.1393091977, 34.898750484)],
                knots=[0.8967260045, 0.8967260045, 0.8967260045, 0.8967260045, 1, 1, 1, 1], degree=3))
            add(Edge.make_bspline(
                [(12.1393091977, 34.898750484), (12.3347678279, 34.8563616726), (13.013036649, 35.5684327938), (13.5880398976, 36.6238878042)],
                knots=[0, 0, 0, 0, 0.14029874, 0.14029874, 0.14029874, 0.14029874], degree=3))
        make_face()
        with BuildLine():
            add(Edge.make_bspline(
                [(-17.3655223204, 39.6654462324), (-17.1795434662, 38.5086964495), (-16.9569761256, 37.6751636257), (-17.1571826672, 37.649743259)],
                knots=[0.8584303839, 0.8584303839, 0.8584303839, 0.8584303839, 1, 1, 1, 1], degree=3))
            add(Edge.make_bspline(
                [(-17.3655223204, 39.6654462324), (-17.8817895896, 39.632116655), (-18.3712700382, 39.4940581173)],
                knots=[6.1810803974, 6.1810803974, 6.1810803974, 6.2831853072, 6.2831853072, 6.2831853072], degree=2, weights=[1, 0.9986971064, 1]))
            add(Edge.make_bspline(
                [(-18.3712700382, 39.4940581173), (-18.4061875265, 39.4842095985), (-18.4409544135, 39.473830681)],
                knots=[0, 0, 0, 0.0072900396, 0.0072900396, 0.0072900396], degree=2, weights=[1, 0.9999933569, 1]))
            add(Edge.make_bspline(
                [(-17.1571826672, 37.649743259), (-17.3543437255, 37.6247095794), (-17.9615142694, 38.3833898112), (-18.4409544135, 39.473830681)],
                knots=[0, 0, 0, 0, 0.1394161006, 0.1394161006, 0.1394161006, 0.1394161006], degree=3))
        make_face()
        with BuildLine():
            add(Edge.make_bspline(
                [(-17.3655223204, 39.6654462324), (-17.8817895896, 39.632116655), (-18.3712700382, 39.4940581173)],
                knots=[6.1810803974, 6.1810803974, 6.1810803974, 6.2831853072, 6.2831853072, 6.2831853072], degree=2, weights=[1, 0.9986971064, 1]))
            add(Edge.make_bspline(
                [(-18.4409544135, 39.473830681), (-18.8397393117, 40.3808288882), (-19.835020981, 44.0248585135), (-14.7059782421, 49.5443378352), (-17.8914813012, 43.9170189047), (-17.5004757849, 40.504828707), (-17.3655223204, 39.6654462324)],
                knots=[0.1394161006, 0.1394161006, 0.1394161006, 0.1394161006, 0.2553785124, 0.5112252974, 0.7557019837, 0.8584303839, 0.8584303839, 0.8584303839, 0.8584303839], degree=3))
            add(Edge.make_bspline(
                [(-18.3712700382, 39.4940581173), (-18.4061875265, 39.4842095985), (-18.4409544135, 39.473830681)],
                knots=[0, 0, 0, 0.0072900396, 0.0072900396, 0.0072900396], degree=2, weights=[1, 0.9999933569, 1]))
        make_face()
    extrude(amount=F1_DEPTH)


solid = f1.part
